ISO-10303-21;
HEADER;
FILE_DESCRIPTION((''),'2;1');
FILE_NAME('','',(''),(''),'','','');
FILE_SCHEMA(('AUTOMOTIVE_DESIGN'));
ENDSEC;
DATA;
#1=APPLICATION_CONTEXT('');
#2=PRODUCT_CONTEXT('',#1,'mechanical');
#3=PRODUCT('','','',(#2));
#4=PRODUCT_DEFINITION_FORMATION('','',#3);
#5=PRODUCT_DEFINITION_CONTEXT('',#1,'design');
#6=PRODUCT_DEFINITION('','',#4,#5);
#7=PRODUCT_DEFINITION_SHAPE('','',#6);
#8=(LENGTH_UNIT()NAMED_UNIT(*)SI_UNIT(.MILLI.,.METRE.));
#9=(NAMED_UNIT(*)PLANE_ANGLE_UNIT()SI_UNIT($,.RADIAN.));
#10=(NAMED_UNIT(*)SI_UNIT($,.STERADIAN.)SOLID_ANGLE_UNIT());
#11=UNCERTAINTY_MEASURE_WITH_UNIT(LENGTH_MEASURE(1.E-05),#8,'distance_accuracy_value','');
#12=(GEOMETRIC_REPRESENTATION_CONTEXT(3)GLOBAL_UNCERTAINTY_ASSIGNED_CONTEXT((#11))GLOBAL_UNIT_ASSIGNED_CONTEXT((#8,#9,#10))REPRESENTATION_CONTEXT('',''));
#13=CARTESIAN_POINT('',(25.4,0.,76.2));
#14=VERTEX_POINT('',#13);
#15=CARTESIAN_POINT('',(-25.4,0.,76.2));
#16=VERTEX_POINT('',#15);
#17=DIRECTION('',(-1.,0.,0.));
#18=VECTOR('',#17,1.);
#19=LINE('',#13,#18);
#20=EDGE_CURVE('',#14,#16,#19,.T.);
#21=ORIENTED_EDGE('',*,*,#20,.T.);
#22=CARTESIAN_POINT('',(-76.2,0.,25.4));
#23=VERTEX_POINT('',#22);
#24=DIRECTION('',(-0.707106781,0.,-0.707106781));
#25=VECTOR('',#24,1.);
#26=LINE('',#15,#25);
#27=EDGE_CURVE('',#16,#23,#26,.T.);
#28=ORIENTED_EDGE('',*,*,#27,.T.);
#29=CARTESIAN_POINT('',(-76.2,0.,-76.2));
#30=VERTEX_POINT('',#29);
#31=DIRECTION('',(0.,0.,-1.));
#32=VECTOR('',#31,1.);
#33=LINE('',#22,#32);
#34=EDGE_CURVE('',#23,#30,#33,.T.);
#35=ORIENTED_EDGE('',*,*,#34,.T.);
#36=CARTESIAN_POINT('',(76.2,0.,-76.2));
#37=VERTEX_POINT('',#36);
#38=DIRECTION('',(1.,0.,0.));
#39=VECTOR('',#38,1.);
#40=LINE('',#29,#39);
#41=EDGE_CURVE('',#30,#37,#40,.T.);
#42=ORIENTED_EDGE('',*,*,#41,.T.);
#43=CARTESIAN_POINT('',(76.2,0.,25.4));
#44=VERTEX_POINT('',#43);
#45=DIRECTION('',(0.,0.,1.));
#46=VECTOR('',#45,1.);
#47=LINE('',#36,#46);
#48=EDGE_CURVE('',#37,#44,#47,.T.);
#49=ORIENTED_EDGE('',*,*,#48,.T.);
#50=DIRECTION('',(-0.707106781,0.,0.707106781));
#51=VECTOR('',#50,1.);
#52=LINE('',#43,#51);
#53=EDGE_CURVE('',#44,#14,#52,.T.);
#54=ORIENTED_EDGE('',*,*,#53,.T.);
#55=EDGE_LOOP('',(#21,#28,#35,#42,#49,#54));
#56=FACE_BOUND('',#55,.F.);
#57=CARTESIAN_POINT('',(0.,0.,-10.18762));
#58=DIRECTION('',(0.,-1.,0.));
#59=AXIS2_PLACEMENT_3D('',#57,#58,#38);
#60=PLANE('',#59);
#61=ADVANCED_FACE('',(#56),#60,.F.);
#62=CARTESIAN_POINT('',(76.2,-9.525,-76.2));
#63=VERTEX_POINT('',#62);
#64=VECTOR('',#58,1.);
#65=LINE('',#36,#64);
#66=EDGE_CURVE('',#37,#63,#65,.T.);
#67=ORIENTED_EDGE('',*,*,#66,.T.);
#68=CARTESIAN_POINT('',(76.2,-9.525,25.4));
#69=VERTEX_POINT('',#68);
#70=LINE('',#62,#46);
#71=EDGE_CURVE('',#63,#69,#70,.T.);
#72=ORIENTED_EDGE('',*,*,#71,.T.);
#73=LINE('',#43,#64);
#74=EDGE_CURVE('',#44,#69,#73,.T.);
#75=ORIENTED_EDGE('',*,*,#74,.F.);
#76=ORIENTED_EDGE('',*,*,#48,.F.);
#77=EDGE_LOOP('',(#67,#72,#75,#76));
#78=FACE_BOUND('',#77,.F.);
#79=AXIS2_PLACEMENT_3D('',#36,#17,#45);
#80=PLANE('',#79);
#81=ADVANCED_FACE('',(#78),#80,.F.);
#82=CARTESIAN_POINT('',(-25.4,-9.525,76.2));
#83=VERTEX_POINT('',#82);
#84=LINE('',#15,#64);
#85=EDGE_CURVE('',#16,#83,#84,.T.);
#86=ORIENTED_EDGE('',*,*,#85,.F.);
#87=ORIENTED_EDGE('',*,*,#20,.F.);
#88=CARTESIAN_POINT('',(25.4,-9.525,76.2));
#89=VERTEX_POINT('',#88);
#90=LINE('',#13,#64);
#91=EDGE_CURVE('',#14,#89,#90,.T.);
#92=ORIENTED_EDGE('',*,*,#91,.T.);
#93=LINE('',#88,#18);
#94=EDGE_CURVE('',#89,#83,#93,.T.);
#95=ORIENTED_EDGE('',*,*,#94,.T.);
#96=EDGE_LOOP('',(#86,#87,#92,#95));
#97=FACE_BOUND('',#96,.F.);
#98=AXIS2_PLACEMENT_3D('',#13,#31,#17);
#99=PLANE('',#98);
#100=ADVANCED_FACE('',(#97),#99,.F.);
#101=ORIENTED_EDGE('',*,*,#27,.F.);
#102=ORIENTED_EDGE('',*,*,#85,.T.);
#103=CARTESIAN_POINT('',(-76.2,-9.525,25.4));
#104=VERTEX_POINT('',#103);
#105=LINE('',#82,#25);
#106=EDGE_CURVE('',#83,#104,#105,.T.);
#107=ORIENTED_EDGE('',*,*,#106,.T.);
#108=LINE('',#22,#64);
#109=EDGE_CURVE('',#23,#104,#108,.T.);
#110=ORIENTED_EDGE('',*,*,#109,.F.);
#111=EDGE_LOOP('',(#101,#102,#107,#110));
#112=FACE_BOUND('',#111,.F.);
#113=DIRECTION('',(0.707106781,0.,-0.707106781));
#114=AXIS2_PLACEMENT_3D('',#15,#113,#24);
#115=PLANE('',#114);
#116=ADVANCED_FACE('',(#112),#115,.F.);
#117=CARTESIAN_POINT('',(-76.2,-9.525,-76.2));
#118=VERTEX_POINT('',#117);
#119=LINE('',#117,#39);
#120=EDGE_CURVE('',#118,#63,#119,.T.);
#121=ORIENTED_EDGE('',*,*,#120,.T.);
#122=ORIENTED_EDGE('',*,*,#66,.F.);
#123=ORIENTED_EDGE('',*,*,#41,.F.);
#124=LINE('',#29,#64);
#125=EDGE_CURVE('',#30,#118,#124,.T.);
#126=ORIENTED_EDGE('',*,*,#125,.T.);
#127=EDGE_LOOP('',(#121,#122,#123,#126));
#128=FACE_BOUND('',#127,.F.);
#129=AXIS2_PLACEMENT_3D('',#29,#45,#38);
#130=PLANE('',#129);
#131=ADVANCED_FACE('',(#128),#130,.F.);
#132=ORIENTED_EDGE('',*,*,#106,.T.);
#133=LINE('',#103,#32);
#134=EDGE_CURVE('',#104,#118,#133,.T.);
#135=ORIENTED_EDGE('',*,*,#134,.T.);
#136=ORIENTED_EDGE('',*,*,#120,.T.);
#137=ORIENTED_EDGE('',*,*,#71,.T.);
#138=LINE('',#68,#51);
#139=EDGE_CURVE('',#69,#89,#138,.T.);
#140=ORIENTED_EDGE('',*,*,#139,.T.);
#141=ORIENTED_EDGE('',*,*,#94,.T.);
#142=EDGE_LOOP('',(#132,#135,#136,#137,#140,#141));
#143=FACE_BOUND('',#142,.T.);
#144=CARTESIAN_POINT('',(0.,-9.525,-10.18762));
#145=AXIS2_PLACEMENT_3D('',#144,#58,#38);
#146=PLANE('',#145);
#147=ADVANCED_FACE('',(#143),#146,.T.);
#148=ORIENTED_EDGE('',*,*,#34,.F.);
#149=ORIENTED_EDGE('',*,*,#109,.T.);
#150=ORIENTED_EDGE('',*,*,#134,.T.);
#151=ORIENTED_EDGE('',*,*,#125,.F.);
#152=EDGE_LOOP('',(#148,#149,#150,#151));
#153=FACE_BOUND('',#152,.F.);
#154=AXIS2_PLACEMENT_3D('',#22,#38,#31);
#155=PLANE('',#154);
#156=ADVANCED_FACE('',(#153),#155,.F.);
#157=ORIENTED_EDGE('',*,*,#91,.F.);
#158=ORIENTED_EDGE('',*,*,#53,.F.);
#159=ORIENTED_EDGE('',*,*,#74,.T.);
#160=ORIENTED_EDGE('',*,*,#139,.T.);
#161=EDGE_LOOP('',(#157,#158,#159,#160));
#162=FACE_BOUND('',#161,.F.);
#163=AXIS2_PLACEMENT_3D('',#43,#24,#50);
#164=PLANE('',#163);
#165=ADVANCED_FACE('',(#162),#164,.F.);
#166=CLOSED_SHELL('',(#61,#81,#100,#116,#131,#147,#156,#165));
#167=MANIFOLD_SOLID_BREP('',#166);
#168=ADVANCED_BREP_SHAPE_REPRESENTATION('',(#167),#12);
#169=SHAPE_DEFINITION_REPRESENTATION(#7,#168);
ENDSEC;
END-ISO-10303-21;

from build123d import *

# Parameters (mm, degrees)
F1_DEPTH = 9.525


# Not quite as in the source:
# - a length typed as a fraction of an inch, garbled in the dataset ("3 / 203.2 mm" for 3/8 in), is restored


with BuildPart() as f1:
    # F0 (on Front) → F1 (new body)
    with BuildSketch(Plane.XZ):
        Polygon((76.2, 25.4), (25.4, 76.2), (-25.4, 76.2), (-76.2, 25.4), (-76.2, -76.2), (76.2, -76.2), align=None)
    extrude(amount=F1_DEPTH)


solid = f1.part
